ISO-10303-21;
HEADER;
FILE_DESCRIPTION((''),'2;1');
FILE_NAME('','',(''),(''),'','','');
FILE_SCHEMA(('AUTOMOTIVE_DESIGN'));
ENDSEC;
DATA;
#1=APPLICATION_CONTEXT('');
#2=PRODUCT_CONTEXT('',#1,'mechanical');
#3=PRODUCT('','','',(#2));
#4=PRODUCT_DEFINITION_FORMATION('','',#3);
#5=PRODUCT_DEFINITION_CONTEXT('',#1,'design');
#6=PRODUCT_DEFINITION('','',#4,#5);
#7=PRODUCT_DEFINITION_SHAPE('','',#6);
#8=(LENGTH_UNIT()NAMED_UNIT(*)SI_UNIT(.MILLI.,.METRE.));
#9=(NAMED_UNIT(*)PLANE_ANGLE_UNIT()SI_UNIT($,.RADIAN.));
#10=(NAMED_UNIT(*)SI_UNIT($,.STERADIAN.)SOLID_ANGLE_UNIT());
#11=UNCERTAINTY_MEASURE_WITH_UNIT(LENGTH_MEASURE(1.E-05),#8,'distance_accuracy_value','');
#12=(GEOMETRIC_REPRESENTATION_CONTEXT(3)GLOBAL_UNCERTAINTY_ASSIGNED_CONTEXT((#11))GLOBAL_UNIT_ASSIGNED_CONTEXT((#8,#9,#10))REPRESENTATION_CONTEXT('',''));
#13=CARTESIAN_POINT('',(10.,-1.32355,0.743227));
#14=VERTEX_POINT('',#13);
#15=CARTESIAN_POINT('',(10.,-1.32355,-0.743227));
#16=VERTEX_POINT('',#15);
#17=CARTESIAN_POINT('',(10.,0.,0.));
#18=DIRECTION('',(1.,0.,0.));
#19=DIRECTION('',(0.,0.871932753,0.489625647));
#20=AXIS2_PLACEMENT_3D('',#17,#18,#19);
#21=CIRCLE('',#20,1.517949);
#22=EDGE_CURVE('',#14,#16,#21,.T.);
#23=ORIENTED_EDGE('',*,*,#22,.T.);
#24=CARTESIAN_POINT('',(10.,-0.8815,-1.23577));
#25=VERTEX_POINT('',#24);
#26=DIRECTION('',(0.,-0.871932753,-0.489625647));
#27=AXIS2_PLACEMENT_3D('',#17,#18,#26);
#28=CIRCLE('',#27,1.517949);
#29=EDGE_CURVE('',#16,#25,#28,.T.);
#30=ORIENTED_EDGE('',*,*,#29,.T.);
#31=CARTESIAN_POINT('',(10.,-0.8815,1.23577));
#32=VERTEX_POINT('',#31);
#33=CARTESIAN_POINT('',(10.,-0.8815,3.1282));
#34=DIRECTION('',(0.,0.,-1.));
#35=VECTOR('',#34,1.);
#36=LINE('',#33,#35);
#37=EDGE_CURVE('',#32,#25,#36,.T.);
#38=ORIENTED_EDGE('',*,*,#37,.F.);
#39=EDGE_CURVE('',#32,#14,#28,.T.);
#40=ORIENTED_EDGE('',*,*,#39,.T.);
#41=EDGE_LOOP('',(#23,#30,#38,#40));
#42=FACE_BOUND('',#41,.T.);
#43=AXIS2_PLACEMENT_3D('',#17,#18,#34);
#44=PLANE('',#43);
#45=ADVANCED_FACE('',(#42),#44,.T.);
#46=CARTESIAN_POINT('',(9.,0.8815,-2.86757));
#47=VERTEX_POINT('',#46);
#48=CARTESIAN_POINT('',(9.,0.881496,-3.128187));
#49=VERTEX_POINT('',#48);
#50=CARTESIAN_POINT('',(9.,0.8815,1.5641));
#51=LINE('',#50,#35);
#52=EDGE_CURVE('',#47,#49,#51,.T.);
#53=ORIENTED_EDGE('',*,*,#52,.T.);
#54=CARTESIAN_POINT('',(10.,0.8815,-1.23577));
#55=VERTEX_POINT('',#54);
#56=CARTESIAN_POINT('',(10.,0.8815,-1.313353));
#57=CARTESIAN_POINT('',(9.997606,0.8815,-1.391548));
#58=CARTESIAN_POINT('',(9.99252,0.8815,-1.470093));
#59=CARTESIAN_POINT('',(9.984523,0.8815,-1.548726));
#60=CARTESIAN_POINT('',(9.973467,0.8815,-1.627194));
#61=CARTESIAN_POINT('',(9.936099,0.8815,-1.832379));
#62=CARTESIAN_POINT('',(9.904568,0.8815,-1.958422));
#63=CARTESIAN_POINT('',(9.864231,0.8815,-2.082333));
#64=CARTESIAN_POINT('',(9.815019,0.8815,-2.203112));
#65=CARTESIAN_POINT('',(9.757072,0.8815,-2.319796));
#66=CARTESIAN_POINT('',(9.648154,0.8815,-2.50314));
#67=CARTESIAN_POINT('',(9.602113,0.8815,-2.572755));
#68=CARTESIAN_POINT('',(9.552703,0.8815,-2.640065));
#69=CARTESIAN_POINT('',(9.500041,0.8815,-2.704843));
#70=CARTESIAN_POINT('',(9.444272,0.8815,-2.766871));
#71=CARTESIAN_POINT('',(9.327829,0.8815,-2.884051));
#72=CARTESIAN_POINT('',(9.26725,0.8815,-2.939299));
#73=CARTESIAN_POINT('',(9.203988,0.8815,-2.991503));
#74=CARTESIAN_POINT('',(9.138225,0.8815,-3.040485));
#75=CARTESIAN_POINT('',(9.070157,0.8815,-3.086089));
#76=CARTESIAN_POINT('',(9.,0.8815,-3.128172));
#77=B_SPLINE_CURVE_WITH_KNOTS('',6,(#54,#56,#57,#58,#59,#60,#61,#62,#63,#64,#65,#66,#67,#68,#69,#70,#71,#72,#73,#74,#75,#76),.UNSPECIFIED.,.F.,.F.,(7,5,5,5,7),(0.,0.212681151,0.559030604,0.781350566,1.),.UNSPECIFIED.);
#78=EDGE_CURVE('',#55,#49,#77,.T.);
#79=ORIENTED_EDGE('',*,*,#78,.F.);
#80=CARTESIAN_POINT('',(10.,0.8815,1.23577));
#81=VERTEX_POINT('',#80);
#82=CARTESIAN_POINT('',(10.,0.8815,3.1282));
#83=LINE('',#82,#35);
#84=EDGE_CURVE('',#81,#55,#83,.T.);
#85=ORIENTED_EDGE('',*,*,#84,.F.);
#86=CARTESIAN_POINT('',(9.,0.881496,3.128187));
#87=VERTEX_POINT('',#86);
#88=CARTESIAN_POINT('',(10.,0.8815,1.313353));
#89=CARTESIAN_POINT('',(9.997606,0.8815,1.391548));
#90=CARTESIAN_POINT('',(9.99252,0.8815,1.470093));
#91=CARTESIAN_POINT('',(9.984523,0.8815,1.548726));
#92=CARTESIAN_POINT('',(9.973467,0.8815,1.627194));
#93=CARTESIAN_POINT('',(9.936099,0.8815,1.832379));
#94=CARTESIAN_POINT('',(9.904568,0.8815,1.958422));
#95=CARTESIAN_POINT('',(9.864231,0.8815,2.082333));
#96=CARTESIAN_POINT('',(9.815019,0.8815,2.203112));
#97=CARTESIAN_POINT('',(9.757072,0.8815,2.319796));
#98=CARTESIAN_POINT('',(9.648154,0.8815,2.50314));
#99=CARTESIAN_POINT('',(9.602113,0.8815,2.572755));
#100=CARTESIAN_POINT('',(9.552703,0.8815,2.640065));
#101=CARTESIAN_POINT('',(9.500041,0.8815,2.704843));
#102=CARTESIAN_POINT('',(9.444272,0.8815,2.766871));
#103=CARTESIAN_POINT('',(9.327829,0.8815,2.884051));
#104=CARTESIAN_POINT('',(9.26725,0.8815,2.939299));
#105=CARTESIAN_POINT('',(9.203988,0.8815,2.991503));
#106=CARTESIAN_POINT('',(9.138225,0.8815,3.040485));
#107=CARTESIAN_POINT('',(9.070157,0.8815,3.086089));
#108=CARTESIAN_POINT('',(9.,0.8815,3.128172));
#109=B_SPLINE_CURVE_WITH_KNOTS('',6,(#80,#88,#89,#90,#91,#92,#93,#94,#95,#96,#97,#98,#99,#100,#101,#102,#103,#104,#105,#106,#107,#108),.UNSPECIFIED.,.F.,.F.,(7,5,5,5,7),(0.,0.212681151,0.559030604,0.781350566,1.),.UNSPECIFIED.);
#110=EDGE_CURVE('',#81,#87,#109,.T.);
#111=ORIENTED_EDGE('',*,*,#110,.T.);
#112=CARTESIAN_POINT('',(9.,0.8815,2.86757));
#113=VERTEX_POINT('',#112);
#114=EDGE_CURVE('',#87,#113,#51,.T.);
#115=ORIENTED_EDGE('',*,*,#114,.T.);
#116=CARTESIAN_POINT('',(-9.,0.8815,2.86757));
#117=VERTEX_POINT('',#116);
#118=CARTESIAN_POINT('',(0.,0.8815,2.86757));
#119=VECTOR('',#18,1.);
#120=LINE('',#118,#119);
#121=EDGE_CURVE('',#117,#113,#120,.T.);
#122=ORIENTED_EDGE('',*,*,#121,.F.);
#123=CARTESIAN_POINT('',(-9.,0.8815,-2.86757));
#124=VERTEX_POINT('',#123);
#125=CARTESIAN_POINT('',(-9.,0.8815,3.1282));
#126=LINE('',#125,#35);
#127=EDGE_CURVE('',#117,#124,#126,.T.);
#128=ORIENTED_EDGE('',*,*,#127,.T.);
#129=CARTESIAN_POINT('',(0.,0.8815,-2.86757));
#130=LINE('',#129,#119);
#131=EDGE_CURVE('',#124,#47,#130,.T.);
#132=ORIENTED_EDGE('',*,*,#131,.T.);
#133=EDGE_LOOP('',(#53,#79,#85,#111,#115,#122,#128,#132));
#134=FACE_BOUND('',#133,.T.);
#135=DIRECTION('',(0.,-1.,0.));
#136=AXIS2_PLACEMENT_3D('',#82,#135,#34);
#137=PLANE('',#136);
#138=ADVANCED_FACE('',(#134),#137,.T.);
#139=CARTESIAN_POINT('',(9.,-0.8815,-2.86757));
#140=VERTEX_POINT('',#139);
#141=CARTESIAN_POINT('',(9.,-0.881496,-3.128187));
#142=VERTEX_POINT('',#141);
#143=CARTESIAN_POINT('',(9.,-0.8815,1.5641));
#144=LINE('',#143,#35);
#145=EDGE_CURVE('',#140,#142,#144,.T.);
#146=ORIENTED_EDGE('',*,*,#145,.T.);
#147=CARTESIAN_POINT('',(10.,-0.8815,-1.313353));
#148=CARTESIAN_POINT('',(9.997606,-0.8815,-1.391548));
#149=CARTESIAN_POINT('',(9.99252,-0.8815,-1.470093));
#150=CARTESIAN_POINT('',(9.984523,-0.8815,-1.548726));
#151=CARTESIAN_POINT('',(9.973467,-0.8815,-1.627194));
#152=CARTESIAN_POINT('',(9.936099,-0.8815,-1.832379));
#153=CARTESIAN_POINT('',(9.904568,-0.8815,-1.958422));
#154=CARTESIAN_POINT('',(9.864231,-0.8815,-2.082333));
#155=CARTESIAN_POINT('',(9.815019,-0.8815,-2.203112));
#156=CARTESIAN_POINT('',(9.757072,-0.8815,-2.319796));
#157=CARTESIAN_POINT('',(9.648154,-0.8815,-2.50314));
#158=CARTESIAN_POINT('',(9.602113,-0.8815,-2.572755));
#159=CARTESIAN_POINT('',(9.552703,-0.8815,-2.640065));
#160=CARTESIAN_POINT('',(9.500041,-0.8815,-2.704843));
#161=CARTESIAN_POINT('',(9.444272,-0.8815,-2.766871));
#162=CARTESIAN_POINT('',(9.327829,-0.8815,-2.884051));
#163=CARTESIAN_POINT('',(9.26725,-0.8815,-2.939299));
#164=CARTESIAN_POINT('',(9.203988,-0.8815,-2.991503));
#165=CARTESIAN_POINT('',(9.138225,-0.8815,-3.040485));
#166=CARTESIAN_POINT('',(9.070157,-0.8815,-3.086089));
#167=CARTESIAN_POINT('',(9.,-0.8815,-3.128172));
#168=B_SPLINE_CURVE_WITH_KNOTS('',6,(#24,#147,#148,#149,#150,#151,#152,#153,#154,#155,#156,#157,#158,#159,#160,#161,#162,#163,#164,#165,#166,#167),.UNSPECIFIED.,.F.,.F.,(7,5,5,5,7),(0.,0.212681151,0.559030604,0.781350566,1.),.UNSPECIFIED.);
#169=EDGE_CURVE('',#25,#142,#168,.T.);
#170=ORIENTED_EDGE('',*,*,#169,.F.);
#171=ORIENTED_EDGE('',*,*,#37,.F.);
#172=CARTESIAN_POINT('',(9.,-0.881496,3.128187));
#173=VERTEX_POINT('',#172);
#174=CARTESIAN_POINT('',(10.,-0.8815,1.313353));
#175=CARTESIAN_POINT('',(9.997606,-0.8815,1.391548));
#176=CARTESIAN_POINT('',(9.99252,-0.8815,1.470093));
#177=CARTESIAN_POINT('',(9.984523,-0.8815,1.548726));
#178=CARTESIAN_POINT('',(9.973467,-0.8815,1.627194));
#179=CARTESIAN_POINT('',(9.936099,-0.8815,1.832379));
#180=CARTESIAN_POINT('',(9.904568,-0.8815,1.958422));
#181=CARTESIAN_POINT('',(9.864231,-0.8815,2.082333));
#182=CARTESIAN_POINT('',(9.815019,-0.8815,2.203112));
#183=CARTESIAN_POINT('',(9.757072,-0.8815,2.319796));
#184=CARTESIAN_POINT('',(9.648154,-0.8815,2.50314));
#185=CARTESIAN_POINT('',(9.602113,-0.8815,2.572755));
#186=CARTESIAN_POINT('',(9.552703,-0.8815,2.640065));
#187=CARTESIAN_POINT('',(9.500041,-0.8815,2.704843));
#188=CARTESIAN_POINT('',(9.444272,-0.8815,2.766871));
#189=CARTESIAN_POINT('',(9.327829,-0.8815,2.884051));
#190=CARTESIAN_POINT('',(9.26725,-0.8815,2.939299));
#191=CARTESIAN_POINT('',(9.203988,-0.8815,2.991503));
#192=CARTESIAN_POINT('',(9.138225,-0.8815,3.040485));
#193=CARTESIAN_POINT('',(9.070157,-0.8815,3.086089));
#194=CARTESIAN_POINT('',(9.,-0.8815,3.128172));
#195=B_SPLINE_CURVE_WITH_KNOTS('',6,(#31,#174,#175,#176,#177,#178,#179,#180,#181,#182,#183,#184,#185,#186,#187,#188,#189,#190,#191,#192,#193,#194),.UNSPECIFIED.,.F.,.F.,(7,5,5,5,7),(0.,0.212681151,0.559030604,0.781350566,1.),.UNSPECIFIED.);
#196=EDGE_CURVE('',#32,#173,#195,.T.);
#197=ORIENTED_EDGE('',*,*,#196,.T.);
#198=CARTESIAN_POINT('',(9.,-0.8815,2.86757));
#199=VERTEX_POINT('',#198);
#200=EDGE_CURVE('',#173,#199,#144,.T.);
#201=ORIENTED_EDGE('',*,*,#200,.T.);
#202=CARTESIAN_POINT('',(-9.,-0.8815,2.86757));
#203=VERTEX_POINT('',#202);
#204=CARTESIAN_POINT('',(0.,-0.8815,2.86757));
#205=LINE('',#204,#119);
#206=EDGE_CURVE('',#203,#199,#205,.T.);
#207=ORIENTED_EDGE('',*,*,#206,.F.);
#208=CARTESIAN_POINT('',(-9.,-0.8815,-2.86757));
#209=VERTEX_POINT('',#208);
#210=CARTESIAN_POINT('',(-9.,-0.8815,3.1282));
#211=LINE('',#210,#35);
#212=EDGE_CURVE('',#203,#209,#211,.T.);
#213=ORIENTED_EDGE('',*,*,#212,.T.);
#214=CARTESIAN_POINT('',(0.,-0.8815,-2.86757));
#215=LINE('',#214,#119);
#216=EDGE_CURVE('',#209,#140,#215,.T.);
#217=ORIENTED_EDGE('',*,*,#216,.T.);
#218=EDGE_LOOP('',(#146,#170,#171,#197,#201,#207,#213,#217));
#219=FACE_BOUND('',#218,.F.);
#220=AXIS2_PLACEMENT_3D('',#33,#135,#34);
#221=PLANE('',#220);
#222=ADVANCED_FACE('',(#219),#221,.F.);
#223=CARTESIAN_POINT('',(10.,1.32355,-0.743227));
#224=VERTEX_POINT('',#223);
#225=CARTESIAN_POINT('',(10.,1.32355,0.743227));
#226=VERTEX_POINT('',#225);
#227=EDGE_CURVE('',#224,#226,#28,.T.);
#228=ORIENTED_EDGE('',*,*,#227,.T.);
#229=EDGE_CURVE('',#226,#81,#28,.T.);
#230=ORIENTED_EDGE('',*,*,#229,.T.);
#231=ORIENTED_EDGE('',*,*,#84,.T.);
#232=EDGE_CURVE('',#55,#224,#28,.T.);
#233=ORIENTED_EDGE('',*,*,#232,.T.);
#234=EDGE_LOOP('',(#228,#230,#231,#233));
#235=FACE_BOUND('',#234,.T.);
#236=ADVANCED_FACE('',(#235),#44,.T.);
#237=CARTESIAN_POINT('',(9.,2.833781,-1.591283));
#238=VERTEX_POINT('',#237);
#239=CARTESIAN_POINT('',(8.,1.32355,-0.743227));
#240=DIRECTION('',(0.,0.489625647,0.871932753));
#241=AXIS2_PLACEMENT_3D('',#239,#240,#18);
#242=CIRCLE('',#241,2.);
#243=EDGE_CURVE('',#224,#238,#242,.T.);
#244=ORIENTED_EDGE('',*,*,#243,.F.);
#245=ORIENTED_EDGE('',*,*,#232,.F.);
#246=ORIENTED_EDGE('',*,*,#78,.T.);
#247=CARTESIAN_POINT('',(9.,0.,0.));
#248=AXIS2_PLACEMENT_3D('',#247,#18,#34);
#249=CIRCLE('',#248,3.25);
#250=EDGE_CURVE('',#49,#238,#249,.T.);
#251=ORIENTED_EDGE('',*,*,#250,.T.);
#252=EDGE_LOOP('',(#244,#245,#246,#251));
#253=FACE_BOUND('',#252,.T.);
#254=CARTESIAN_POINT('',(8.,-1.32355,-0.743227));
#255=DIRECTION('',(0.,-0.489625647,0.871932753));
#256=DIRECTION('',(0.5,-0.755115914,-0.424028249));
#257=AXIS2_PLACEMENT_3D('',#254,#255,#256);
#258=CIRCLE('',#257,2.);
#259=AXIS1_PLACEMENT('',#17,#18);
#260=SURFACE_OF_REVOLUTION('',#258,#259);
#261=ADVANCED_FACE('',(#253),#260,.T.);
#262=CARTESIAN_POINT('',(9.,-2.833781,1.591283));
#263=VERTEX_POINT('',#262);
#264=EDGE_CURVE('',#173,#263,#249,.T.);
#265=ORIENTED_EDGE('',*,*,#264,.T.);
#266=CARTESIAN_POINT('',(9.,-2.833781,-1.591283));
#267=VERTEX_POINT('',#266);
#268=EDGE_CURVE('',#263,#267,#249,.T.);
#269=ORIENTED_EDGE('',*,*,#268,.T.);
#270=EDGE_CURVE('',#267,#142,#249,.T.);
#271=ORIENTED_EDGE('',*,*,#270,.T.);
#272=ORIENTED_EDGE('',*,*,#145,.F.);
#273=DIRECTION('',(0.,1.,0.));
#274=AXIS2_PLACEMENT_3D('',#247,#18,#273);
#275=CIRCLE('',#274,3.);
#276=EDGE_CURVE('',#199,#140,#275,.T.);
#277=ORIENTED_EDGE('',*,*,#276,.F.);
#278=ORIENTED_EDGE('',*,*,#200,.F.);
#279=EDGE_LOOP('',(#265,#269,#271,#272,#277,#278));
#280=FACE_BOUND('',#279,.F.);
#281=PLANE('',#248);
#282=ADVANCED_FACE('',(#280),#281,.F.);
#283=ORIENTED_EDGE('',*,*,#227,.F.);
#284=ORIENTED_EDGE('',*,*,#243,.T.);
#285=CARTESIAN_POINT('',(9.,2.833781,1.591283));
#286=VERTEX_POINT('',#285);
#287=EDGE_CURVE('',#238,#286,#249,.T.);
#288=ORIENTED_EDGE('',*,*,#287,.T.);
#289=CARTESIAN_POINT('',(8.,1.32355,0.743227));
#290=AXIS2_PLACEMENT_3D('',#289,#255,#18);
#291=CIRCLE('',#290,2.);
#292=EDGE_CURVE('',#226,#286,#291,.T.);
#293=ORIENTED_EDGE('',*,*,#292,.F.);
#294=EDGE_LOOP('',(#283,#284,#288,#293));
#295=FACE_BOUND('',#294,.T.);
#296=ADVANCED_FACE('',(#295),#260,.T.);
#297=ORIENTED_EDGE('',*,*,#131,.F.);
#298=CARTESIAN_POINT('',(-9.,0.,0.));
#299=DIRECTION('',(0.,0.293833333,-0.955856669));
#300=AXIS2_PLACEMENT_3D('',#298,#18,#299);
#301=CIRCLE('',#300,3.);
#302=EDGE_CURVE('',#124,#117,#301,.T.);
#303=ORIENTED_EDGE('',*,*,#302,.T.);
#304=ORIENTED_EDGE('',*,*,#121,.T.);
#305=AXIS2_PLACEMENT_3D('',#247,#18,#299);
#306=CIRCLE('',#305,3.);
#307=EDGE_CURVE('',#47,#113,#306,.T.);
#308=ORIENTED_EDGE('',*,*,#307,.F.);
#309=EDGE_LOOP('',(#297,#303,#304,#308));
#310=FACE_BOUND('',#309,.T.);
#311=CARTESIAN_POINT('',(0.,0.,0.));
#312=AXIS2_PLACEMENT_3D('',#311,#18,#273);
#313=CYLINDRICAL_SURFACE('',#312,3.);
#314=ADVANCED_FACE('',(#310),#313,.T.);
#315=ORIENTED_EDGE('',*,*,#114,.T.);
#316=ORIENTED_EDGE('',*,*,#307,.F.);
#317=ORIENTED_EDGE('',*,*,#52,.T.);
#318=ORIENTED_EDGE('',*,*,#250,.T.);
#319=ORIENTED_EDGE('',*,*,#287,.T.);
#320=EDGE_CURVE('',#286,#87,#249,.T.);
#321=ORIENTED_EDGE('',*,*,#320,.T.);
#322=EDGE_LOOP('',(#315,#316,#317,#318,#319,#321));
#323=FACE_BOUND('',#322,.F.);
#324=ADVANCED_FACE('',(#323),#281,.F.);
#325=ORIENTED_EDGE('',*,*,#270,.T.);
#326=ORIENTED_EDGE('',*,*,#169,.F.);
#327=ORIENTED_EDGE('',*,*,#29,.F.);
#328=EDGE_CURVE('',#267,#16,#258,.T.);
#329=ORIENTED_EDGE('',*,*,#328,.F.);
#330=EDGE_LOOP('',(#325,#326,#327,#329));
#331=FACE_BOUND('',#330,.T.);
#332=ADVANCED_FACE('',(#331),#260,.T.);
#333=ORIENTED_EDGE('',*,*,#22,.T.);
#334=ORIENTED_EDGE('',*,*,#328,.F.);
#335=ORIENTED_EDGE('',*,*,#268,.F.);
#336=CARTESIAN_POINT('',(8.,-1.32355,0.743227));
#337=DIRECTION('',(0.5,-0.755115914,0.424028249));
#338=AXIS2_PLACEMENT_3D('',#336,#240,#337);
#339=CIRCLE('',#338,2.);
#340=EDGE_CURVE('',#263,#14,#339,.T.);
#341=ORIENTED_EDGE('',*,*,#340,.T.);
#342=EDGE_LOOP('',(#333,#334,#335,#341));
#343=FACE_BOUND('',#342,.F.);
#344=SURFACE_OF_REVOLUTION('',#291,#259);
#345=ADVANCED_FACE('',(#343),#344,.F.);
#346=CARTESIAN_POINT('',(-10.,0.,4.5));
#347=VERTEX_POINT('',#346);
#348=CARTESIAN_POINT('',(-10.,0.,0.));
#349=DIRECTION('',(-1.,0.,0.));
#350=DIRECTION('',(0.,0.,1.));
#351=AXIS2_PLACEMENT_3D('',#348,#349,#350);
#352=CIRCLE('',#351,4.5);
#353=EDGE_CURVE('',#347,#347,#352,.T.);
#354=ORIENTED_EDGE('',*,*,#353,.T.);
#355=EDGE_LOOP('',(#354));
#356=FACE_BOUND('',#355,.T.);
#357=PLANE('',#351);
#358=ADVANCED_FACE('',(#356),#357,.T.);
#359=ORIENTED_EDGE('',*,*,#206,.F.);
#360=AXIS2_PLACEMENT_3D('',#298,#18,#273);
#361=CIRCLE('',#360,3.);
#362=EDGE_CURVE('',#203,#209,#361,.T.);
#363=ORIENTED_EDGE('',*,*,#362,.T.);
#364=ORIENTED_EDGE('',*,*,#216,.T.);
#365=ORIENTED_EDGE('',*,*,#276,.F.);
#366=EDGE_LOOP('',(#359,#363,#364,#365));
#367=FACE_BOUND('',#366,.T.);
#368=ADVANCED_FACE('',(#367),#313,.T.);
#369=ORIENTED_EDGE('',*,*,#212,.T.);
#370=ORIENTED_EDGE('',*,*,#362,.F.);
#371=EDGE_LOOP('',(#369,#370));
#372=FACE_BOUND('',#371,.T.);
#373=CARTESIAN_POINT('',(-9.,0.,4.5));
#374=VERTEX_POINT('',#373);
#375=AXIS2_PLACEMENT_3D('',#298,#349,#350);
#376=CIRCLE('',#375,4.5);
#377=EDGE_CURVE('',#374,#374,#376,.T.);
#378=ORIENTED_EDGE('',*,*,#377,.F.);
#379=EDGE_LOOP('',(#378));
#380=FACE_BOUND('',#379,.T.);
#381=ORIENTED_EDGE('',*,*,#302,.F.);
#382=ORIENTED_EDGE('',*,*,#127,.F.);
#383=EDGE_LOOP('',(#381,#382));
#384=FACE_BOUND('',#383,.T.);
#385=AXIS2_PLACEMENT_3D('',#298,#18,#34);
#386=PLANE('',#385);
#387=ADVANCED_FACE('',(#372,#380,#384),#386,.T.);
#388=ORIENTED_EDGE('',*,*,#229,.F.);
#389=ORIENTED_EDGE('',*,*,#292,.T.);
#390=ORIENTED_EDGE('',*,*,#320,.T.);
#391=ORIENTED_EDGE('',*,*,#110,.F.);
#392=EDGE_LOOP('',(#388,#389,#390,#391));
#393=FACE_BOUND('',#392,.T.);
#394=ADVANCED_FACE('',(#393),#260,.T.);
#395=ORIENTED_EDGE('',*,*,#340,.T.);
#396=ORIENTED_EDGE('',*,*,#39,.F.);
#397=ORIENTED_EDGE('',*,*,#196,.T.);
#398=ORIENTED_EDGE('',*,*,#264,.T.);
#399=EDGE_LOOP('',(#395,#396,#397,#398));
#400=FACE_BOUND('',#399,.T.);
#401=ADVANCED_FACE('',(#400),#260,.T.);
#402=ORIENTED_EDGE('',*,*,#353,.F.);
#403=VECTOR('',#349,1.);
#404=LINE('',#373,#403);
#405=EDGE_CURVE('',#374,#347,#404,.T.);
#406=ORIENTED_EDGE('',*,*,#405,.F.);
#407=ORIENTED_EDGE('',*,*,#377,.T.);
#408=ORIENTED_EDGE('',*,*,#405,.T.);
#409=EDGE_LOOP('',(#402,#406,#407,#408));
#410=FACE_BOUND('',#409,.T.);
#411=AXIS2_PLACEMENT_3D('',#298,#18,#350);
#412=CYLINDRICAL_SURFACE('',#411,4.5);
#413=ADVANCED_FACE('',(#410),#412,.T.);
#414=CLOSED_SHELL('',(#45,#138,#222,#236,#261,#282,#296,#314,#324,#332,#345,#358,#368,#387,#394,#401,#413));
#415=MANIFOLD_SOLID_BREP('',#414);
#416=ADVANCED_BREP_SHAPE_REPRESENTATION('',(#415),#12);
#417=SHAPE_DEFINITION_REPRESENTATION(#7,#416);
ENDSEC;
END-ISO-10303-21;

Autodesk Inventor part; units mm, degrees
ref_plane "YZ Plane" through (0, 0, 0) normal (1, 0, 0) x (0, 1, 0)
ref_plane "XZ Plane" through (0, 0, 0) normal (0, 1, 0) x (-1, 0, 0)
ref_plane "XY Plane" through (0, 0, 0) normal (0, 0, 1) x (1, 0, 0)
sketch "Sketch1" plane through (0, 0, 0) normal (1, 0, 0) x (0, 1, 0)
  circle A0 centre (0, 0) radius 3
  dimension "d0" = 6
extrude "Extrusion1" add sketch "Sketch1" along normal mid plane 18
sketch "Sketch2" plane through (-9, 0, 0) normal (-1, 0, 0) x (0, 0, 1)
  circle A0 centre (0, 0) radius 4.5
  dimension "d3" = 9
extrude "Extrusion2" add sketch "Sketch2" along normal blind 1
sketch "Sketch3" plane through (9, 0, 0) normal (1, 0, 0) x (0, 0, -1)
  circle A0 centre (0, 0) radius 3.25
  dimension "d6" = 6.5
extrude "Extrusion3" add sketch "Sketch3" along normal blind 1
sketch "Sketch4" plane through (10, 0, 0) normal (1, 0, 0) x (0, 0, -1)
  circle A0 centre (0, 0) radius 3.25 projected
  line L0 (-3.1282, 0.8815) -> (3.1282, 0.8815)
  line L1 (-3.25, 0) -> (3.25, 0)
  line L2 (-3.1282, -0.8815) -> (3.1282, -0.8815)
  arc A1 (-3.1282, 0.8815) -> (-3.1282, -0.8815) centre (0, 0) ccw
  arc A2 (3.1282, -0.8815) -> (3.1282, 0.8815) centre (0, 0) ccw
extrude "Extrusion4" cut sketch "Sketch4" against normal blind 19 contours L1 A0 L0 | A0 L2 L1
fillet "Fillet1" radius 2 2 edges at (10, 3.25, 0) (10, -3.25, 0)
properties part number "OsovinaZaPrednjiKotač_v.1.0"
